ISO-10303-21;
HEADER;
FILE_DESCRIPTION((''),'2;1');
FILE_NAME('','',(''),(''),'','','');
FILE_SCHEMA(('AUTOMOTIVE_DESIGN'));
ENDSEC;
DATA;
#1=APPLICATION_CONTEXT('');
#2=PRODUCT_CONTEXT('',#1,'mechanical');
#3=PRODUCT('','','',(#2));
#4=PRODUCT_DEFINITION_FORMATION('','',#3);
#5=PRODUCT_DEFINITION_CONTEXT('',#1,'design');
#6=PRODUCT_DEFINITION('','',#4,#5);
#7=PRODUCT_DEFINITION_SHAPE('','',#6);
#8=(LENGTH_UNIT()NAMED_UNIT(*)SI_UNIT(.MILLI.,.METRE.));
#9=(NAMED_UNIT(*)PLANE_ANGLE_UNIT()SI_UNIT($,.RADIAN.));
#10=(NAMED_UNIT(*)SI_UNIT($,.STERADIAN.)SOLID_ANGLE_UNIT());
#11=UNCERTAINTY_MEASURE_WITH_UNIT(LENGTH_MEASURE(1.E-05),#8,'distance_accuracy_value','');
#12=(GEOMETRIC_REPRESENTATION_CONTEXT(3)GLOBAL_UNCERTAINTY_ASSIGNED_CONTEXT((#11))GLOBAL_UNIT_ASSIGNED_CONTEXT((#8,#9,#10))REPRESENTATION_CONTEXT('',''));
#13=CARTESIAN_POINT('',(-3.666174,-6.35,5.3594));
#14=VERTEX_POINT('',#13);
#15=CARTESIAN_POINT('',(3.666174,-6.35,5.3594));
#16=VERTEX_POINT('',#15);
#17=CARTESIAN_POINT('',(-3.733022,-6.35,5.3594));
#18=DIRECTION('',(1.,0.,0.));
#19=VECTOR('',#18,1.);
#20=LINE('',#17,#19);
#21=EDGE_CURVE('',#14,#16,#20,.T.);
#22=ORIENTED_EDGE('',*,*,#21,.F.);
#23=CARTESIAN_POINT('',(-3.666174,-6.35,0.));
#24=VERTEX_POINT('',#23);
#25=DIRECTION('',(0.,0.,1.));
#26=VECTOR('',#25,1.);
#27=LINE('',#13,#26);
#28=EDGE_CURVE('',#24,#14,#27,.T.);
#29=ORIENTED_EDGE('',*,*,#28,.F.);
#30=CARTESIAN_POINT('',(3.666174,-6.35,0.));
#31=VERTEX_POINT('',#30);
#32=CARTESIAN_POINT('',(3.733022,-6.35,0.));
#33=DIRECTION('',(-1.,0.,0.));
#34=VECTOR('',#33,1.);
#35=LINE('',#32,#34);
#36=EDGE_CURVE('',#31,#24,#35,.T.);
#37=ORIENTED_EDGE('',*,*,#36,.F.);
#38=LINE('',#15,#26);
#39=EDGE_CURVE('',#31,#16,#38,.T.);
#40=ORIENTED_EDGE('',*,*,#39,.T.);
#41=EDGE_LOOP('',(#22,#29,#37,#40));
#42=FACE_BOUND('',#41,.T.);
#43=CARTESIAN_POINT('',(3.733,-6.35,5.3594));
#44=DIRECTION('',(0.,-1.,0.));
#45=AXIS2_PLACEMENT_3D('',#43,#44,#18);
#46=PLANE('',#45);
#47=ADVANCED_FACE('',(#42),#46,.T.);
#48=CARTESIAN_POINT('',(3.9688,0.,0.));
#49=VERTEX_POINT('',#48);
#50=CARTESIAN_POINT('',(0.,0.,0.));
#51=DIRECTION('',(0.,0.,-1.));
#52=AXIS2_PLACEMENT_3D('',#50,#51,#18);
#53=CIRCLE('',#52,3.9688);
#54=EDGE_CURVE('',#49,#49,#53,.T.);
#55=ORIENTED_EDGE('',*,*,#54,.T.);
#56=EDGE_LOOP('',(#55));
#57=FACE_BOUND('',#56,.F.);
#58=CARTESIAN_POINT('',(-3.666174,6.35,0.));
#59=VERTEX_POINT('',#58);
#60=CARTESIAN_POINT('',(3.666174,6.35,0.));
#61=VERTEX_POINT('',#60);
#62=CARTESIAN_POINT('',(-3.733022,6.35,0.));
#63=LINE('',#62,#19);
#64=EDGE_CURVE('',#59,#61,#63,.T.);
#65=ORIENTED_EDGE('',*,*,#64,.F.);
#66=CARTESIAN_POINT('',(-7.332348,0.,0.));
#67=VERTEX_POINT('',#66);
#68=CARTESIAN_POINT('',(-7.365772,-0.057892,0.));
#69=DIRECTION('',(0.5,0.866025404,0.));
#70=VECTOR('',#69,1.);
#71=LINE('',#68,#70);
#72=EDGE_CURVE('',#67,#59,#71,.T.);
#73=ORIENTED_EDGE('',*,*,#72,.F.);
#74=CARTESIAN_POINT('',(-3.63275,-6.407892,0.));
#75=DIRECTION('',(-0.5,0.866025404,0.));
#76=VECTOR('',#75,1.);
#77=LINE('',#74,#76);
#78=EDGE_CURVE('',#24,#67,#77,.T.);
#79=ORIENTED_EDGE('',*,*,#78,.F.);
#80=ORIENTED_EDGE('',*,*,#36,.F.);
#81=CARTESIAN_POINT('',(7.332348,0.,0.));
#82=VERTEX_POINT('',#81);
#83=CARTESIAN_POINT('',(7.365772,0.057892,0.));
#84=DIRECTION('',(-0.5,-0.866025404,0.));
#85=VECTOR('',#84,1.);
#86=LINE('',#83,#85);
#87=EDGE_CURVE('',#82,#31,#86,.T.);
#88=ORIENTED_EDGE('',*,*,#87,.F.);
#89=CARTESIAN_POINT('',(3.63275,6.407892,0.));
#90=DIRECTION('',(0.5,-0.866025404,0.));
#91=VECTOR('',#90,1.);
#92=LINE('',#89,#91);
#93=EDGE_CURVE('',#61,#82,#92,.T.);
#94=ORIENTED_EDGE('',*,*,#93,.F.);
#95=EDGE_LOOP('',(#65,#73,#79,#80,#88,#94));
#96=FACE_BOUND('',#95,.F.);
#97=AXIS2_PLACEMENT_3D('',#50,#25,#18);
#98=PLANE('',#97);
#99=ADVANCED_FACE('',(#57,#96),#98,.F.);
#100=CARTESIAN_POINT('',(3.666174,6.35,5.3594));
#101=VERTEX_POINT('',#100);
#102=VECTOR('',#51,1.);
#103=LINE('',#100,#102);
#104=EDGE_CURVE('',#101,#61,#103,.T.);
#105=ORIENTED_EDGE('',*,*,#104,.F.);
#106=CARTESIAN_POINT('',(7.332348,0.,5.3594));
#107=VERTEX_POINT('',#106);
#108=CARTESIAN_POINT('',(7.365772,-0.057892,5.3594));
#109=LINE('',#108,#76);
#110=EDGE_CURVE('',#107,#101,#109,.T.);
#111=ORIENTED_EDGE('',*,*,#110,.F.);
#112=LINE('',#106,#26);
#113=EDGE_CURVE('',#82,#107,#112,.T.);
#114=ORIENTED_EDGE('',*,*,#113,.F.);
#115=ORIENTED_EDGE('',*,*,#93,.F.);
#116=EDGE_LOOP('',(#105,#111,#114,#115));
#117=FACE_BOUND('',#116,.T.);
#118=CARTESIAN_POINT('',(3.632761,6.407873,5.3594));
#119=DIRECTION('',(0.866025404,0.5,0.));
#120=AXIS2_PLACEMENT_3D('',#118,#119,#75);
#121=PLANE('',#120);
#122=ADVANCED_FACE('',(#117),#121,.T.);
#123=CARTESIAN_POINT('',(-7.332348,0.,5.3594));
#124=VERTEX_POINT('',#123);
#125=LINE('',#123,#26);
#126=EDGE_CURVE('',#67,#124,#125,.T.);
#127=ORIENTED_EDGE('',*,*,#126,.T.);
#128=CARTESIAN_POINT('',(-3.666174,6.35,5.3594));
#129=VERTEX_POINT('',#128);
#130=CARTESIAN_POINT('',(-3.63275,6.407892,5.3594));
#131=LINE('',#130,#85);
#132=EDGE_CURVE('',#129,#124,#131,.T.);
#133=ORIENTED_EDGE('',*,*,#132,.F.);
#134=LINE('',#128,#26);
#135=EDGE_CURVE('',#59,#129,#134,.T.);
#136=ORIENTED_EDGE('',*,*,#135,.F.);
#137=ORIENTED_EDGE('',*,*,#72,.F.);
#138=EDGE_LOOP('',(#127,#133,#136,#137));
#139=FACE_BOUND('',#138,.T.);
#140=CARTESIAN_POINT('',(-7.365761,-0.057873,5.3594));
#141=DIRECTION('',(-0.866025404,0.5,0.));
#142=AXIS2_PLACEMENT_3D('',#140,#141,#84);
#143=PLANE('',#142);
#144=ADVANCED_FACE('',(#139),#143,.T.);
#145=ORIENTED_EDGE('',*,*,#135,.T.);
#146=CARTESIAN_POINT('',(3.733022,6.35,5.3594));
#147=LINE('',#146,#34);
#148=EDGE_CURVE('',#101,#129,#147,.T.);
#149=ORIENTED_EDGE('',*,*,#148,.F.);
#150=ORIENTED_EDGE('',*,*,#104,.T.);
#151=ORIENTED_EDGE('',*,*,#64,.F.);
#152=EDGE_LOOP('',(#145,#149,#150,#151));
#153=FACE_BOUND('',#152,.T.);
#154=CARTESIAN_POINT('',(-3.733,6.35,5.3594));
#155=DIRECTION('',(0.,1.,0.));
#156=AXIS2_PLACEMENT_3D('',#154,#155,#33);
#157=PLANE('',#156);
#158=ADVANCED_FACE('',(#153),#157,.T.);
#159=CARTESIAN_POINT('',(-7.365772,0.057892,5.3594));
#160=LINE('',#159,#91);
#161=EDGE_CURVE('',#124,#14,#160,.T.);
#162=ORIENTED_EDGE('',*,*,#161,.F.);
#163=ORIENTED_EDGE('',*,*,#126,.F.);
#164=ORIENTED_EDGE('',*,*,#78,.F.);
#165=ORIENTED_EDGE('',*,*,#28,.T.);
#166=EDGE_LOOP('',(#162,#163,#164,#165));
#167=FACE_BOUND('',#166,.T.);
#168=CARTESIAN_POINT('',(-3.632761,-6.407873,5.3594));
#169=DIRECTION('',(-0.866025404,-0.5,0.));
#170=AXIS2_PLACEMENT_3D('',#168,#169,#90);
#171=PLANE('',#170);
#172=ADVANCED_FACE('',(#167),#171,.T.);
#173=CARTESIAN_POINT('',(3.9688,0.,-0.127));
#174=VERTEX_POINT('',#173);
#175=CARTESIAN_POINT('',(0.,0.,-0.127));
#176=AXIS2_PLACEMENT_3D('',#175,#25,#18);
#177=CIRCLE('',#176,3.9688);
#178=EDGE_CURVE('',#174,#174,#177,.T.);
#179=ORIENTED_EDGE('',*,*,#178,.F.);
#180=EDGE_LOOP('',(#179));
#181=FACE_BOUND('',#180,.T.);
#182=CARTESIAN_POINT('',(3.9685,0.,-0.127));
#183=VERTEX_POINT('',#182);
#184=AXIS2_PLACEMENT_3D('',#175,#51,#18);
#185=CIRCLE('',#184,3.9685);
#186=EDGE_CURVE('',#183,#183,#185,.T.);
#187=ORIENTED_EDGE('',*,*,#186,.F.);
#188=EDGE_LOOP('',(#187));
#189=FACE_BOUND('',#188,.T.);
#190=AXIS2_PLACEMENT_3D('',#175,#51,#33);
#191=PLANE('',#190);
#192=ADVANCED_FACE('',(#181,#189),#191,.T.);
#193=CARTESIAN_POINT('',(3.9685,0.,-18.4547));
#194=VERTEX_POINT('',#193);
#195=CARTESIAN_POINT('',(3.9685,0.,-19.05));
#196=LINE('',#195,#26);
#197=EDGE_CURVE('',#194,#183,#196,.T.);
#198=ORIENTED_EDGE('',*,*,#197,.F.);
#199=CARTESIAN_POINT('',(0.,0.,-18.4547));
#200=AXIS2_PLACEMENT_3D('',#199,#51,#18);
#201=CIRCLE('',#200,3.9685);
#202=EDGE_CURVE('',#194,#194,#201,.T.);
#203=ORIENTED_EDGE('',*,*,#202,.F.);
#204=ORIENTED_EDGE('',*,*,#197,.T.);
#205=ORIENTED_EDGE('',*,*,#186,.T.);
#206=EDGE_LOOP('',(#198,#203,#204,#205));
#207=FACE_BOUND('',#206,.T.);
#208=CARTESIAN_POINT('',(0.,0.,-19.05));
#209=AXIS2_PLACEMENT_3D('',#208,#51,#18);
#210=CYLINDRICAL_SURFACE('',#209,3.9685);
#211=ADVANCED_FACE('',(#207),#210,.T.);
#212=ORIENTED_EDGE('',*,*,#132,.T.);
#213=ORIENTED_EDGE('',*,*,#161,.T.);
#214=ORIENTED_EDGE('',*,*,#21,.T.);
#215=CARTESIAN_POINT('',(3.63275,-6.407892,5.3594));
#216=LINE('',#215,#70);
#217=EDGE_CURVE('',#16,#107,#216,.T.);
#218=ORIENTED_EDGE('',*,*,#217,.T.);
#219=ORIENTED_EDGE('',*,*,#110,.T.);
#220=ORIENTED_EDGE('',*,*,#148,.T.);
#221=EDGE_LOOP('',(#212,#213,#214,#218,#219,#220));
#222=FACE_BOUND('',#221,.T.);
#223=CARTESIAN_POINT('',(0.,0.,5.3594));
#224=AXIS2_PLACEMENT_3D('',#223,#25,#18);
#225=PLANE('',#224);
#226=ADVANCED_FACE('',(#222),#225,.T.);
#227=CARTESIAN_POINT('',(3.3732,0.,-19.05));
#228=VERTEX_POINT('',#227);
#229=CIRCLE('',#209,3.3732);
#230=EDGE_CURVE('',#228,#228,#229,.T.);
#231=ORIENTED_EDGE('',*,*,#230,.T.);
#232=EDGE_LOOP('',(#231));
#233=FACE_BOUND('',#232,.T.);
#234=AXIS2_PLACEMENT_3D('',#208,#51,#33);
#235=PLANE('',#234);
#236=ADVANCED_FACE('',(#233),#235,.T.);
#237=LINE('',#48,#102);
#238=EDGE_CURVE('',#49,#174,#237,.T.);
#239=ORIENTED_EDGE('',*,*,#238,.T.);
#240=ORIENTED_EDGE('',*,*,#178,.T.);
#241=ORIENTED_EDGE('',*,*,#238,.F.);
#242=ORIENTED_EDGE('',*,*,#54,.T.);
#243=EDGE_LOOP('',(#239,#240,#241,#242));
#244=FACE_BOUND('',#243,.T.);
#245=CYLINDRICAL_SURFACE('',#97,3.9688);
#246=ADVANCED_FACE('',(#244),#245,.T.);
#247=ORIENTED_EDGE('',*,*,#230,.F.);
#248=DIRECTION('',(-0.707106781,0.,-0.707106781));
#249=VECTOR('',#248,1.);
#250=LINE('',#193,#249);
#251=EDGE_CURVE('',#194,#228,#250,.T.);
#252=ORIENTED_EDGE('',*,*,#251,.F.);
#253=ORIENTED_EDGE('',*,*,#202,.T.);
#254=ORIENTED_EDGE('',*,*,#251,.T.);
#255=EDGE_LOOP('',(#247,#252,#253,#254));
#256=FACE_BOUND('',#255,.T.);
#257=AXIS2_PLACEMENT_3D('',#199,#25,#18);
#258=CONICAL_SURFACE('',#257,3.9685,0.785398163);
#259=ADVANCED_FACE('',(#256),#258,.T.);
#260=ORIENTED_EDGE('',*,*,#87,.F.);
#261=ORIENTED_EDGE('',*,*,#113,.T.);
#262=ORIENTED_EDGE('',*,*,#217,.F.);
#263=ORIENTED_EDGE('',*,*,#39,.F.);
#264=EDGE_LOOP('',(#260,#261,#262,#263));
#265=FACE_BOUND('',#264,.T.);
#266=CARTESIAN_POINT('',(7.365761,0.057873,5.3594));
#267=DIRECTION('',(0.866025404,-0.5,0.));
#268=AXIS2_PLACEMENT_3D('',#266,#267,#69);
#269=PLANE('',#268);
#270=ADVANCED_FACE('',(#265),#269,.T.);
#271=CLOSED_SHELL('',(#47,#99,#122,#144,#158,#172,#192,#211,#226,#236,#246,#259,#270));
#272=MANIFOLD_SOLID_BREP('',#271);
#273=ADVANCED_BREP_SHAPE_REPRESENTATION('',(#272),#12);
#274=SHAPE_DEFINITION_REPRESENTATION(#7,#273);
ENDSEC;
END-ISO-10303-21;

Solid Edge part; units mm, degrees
sketch "Sketch1" plane through (0, 0, 0) normal (0, 0, 1) x (1, 0, 0)
  circle A0 centre (0, 0) radius 7.366
  dimension "D1" = 14.732
extrude "Protrusion1" add sketch "Sketch1" along normal blind 5.3594
sketch "Sketch2" plane through (0, 0, 0) normal (0, 0, -1) x (1, 0, 0)
  circle A0 centre (0, 0) radius 3.9688
extrude "Protrusion2" add sketch "Sketch2" along normal blind 19.05
sketch "Sketch3" plane through (0, 0, -19.05) normal (0, 0, -1) x (1, 0, 0)
  circle A0 centre (0, 0) radius 3.9685
extrude "Cutout1" cut sketch "Sketch3" against normal blind 18.923 flip side to cut
chamfer "Chamfer_1" distance 0.5953 angle 45 1 edges at (-3.9685, 0, -19.05)
sketch "Sketch4" plane through (0, 0, 5.3594) normal (0, 0, 1) x (1, 0, 0)
  line L0 (-3.733, 6.35) -> (3.733, 6.35)
  dimension "D1" = 12.7
extrude "Cutout2" cut sketch "Sketch4" against normal up to next material side at (0, 6.4, 5.3594)
pattern_circular "Pattern1" count 6 over 360 about axis through (0, 0, 5.3594) along (0, 0, 1) of "Cutout2"
properties part number "24109277"
